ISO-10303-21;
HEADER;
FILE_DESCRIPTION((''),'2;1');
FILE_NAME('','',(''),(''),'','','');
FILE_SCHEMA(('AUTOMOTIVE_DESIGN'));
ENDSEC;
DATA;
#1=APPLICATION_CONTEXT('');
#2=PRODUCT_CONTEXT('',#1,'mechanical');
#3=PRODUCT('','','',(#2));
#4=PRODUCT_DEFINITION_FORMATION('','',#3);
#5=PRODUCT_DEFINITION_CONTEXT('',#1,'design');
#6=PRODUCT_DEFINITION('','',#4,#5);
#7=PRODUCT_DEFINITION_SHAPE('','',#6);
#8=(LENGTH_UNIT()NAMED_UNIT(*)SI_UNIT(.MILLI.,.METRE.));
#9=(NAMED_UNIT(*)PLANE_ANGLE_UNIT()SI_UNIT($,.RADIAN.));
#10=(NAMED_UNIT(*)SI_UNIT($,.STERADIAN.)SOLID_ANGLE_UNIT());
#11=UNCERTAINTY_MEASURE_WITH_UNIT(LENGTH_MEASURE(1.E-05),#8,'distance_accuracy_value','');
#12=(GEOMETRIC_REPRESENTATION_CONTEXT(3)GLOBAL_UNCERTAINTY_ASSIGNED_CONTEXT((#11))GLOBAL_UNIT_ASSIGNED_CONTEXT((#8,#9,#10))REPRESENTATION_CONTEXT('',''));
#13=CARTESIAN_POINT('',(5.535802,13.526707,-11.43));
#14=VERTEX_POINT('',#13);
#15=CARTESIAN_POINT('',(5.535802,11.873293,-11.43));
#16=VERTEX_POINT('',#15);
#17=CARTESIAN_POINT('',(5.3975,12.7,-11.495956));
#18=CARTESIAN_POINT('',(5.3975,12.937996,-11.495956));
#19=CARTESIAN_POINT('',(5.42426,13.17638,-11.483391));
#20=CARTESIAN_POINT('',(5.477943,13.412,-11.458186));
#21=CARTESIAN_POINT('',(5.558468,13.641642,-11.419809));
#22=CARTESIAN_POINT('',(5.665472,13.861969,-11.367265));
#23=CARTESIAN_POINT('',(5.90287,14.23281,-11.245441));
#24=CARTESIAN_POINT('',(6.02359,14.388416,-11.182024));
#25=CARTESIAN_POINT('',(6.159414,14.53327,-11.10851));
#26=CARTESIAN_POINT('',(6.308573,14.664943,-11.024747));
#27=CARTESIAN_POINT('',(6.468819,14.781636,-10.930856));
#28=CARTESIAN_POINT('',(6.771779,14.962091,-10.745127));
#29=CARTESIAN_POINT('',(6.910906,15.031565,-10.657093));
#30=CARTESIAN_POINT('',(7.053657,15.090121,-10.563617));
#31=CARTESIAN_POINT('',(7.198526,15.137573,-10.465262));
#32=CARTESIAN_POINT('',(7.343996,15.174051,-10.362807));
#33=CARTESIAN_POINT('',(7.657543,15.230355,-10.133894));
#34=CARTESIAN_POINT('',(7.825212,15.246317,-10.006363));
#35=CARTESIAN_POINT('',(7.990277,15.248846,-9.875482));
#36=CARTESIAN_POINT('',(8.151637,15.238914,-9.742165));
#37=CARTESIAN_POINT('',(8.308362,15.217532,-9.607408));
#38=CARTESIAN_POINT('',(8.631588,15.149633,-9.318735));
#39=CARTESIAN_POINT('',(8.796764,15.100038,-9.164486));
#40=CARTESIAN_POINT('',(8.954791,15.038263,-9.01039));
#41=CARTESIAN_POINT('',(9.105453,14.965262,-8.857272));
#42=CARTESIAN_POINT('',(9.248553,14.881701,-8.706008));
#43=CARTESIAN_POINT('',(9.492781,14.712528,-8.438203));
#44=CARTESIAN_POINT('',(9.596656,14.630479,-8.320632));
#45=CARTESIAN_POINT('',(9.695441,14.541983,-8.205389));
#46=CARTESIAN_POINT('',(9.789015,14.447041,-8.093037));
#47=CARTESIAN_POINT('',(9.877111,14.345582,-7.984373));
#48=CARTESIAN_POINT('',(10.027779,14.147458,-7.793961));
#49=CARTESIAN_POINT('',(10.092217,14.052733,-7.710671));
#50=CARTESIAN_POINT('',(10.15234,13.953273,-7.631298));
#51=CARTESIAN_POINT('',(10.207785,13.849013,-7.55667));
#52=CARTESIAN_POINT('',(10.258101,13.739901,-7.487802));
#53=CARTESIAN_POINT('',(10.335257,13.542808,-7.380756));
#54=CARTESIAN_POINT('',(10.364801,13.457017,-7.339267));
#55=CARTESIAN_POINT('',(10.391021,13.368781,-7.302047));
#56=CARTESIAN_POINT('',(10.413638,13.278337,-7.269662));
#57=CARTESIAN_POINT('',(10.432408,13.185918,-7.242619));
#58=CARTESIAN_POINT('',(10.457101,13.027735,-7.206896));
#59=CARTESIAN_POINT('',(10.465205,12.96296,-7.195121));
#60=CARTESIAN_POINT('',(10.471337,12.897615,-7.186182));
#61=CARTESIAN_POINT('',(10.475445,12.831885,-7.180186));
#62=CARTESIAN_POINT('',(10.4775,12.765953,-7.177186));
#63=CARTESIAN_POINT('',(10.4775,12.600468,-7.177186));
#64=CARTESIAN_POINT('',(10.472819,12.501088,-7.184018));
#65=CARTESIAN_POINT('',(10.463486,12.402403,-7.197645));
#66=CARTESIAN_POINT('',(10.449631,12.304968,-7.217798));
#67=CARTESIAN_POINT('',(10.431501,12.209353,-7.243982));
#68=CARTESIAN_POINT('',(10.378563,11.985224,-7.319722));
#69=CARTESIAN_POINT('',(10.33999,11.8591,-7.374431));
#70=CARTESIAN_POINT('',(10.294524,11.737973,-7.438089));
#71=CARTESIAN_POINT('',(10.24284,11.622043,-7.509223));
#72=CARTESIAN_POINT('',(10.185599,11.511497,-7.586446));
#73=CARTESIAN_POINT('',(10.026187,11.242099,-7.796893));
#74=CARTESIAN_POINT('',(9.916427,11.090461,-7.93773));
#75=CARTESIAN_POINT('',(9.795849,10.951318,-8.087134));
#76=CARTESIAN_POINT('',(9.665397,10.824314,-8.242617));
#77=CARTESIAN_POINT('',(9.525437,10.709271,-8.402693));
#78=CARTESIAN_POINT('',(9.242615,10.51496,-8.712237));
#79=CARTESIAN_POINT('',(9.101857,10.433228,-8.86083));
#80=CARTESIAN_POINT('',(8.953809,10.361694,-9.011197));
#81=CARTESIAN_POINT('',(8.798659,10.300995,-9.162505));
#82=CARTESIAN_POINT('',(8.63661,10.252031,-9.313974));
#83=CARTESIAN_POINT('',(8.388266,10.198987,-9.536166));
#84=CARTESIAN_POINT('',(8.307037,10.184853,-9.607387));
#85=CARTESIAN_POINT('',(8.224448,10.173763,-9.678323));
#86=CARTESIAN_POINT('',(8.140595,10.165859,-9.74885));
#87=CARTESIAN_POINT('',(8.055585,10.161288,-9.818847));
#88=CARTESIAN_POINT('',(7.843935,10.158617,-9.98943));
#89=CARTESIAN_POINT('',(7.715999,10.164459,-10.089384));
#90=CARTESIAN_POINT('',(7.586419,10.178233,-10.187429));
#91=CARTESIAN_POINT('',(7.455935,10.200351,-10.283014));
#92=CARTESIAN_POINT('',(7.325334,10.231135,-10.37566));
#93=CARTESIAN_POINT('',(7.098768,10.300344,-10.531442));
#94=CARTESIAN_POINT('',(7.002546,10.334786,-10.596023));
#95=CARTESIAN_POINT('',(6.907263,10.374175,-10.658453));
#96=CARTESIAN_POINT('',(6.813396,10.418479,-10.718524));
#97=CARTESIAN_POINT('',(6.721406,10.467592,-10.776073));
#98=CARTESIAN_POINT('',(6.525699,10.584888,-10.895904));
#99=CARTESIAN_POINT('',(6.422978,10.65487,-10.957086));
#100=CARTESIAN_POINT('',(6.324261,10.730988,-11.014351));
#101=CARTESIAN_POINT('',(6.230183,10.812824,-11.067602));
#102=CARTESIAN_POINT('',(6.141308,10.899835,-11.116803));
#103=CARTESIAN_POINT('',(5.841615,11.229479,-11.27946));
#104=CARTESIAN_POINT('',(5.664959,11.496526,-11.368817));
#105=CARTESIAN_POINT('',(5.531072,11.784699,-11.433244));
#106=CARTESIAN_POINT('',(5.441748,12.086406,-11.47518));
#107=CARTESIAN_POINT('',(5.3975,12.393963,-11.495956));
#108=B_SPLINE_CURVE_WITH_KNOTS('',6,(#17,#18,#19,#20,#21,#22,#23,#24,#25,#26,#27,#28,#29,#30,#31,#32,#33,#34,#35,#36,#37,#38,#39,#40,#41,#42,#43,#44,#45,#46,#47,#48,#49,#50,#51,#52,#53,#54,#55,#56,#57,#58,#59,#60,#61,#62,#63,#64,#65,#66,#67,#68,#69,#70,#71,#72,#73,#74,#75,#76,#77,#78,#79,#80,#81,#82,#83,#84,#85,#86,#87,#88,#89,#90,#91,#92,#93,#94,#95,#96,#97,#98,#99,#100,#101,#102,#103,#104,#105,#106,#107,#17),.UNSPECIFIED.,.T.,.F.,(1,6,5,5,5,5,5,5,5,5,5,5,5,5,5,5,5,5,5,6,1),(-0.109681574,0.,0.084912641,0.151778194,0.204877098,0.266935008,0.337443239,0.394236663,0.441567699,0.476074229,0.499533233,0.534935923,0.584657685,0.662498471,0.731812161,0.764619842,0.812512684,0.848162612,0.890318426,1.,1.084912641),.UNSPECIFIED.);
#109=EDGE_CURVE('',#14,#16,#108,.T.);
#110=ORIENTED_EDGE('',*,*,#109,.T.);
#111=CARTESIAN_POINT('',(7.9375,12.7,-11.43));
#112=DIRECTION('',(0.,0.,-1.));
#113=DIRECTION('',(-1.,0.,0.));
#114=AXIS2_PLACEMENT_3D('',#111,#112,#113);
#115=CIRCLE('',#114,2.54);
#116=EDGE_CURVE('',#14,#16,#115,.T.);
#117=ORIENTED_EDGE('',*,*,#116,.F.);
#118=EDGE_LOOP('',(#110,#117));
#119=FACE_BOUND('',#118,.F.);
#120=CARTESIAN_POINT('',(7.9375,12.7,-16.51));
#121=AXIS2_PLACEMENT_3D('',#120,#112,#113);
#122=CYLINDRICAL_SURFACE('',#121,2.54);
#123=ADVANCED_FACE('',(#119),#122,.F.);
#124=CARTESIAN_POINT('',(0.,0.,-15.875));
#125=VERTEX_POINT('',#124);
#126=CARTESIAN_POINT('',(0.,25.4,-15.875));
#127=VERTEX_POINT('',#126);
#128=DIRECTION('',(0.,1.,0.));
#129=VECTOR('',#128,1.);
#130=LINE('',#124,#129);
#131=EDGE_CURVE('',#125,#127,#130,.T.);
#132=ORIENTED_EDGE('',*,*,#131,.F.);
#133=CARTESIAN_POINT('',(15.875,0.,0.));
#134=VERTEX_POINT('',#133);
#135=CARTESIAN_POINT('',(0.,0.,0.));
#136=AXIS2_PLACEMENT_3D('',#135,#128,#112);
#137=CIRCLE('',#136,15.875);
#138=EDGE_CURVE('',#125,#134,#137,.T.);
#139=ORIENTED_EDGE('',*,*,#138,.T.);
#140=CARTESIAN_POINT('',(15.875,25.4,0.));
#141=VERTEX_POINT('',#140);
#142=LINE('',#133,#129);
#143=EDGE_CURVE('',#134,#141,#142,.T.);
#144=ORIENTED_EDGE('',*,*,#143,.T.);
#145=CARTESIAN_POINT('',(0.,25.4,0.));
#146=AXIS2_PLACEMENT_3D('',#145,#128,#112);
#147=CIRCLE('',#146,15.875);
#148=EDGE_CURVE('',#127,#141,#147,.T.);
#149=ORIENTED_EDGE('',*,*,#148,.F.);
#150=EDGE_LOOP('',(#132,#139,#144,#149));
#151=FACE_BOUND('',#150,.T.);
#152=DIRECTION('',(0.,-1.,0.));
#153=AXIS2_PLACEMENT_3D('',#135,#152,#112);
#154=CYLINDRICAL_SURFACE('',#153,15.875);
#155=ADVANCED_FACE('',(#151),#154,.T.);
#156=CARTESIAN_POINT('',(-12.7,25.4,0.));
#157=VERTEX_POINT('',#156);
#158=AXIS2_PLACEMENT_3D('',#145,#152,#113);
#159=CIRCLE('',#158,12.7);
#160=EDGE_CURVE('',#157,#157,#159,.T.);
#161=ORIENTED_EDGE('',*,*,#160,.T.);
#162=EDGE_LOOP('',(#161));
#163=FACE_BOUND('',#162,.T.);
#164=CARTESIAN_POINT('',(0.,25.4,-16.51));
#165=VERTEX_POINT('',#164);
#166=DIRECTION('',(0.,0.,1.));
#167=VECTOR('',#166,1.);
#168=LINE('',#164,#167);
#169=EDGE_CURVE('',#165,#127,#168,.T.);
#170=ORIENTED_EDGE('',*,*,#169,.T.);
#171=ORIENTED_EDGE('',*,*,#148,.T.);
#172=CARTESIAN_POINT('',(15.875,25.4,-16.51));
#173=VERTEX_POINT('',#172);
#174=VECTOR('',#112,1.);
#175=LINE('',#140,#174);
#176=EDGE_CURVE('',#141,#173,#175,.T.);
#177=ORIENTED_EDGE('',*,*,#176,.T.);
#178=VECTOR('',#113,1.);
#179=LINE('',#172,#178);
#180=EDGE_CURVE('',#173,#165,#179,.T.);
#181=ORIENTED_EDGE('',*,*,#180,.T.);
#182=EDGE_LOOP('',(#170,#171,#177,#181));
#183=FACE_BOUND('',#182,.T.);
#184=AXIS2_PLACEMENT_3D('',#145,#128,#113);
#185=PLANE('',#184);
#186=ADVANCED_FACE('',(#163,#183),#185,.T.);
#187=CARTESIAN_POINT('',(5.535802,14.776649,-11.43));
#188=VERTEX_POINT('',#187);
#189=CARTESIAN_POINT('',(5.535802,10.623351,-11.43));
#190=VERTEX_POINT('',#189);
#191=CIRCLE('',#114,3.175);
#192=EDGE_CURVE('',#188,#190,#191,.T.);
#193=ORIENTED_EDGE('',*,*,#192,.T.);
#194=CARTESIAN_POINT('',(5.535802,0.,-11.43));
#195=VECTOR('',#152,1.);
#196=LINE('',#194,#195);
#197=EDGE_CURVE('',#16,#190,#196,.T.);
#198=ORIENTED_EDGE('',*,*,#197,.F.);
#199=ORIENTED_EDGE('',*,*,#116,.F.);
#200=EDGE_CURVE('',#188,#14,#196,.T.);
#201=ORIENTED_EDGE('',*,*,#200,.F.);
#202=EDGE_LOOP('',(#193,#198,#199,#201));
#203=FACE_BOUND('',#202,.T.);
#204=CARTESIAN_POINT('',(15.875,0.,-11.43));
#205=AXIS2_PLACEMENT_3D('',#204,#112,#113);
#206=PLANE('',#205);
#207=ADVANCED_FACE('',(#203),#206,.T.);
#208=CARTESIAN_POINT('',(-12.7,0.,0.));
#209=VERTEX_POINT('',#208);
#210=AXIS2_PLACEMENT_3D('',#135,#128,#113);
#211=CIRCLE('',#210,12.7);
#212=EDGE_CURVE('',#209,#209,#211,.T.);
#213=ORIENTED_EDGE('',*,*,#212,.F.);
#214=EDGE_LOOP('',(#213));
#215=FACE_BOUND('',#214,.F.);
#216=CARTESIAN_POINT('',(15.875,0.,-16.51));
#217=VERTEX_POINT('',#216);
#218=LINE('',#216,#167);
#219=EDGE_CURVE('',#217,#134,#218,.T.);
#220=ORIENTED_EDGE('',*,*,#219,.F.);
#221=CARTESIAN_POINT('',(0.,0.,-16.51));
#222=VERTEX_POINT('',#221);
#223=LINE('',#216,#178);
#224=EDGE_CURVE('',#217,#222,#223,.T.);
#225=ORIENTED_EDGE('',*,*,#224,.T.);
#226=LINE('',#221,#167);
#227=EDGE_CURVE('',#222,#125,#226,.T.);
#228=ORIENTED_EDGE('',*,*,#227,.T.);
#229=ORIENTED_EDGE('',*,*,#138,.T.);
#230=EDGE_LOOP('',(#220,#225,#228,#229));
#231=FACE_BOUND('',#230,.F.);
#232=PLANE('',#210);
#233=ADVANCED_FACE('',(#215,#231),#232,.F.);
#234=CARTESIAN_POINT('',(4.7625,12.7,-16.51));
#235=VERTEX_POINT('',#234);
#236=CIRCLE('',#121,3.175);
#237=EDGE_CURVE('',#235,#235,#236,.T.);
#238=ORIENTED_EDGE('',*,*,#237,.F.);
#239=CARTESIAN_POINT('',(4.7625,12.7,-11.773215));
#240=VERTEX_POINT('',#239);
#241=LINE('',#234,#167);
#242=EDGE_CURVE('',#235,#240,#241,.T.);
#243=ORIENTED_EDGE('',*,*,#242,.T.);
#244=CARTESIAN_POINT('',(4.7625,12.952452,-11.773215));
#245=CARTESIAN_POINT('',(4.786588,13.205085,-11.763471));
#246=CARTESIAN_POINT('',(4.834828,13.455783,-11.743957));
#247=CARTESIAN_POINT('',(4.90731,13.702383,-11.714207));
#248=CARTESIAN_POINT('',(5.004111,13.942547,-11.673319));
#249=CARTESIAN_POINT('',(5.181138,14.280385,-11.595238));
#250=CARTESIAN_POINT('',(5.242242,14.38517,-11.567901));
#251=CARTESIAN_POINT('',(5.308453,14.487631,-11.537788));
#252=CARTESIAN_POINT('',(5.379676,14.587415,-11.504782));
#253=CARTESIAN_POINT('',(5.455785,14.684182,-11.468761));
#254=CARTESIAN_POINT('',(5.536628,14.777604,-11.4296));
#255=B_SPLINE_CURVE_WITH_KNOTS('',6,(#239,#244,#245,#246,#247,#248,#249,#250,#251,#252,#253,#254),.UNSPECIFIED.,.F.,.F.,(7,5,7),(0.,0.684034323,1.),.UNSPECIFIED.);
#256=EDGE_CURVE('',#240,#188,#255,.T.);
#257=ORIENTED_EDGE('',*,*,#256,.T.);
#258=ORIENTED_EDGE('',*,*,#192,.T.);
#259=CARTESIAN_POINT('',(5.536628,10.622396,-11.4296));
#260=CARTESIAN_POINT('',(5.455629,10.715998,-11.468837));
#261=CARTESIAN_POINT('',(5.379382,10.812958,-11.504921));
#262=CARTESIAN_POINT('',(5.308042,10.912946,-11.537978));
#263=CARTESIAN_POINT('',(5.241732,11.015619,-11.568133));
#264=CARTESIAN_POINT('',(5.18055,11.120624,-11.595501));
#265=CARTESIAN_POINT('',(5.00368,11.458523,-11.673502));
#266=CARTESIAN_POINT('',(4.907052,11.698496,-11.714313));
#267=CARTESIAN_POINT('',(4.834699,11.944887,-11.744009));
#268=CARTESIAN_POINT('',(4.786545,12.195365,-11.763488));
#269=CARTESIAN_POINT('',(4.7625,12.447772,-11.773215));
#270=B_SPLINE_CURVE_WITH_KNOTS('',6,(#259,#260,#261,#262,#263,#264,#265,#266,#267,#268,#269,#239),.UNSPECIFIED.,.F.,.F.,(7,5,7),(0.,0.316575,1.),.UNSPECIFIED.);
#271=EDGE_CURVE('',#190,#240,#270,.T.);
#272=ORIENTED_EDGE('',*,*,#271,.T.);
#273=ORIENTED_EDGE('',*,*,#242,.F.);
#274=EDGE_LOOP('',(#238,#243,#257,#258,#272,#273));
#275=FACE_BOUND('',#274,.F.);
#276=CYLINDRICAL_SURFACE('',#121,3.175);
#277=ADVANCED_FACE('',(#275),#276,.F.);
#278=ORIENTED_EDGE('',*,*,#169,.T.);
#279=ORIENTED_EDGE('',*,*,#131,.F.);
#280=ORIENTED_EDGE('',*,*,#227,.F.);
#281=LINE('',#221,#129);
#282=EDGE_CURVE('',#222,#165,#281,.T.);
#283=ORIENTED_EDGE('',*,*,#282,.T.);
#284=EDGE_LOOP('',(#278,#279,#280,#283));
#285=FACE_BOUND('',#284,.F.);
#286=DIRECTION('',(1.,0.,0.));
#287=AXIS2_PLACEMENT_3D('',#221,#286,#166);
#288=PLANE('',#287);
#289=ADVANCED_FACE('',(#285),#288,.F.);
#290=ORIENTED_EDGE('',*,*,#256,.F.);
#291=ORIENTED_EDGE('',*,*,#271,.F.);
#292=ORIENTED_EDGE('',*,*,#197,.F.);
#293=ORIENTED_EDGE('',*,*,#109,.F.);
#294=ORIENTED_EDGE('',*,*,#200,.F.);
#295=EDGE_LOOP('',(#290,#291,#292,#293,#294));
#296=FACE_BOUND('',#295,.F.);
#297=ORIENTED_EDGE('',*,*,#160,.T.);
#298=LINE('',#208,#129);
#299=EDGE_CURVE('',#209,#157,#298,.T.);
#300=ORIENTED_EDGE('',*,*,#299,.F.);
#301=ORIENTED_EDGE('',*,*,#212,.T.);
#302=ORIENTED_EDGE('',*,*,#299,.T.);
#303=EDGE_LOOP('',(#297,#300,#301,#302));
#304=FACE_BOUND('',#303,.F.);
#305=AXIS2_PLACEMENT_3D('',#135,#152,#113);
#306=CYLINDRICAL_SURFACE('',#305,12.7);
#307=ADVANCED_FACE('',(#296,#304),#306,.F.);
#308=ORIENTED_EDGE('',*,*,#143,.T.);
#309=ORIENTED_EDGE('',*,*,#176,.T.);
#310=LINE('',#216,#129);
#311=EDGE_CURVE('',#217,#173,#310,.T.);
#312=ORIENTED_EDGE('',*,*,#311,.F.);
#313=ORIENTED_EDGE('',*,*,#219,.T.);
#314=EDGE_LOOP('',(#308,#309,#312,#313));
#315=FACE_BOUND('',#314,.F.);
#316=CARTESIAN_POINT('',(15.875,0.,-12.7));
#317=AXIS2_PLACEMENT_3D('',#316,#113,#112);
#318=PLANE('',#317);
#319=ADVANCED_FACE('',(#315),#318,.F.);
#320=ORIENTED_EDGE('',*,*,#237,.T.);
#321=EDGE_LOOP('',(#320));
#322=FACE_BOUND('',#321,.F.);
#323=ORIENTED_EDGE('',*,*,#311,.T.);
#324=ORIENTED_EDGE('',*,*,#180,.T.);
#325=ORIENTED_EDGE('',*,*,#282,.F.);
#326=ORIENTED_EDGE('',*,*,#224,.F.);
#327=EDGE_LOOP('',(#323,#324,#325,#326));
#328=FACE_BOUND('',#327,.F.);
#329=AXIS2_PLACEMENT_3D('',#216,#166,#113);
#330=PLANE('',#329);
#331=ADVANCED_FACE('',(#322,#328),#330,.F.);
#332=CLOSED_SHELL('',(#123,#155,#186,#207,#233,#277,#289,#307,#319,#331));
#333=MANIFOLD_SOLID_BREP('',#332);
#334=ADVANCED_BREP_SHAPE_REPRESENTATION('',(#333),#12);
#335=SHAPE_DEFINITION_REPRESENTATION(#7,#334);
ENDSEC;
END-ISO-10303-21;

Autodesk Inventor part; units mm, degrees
ref_plane "YZ Plane" through (0, 0, 0) normal (1, 0, 0) x (0, 1, 0)
ref_plane "XZ Plane" through (0, 0, 0) normal (0, 1, 0) x (-1, 0, 0)
ref_plane "XY Plane" through (0, 0, 0) normal (0, 0, 1) x (1, 0, 0)
sketch "Sketch1" plane through (0, 0, 0) normal (0, 1, 0) x (-1, 0, 0)
  circle A0 centre (0, 0) radius 12.7
  arc A1 (0, -15.875) -> (-15.875, 0) centre (0, 0) ccw
  line L0 (-15.875, -12.7) -> (-15.875, -16.51)
  line L1 (-15.875, -16.51) -> (0, -16.51)
  line L2 (0, -16.51) -> (0, -12.7)
  line L3 (-15.875, -12.7) -> (-15.875, 0)
  dimension "d0" = 25.4
  dimension "d1" = 31.75
  dimension "d2" = 3.81
extrude "Extrusion1" add sketch "Sketch1" along normal blind 25.4
sketch "Sketch2" plane through (15.875, 0, -16.51) normal (0, 0, -1) x (-1, 0, 0)
  circle A0 centre (7.9375, 12.7) radius 2.54
  line L0 (15.875, 0) -> (15.875, 25.4) projected
  dimension "d5" = 5.08
  dimension "d6" = 7.9375
extrude "Extrusion2" cut sketch "Sketch2" against normal blind 13.081
sketch "Sketch3" plane through (15.875, 0, -16.51) normal (0, 0, -1) x (-1, 0, 0)
  circle A0 centre (7.9375, 12.7) radius 3.175
  line L0 (15.875, 0) -> (15.875, 25.4) projected
  dimension "d9" = 6.35
  dimension "d10" = 7.9375
extrude "Extrusion3" cut sketch "Sketch3" against normal blind 5.08
properties part number "motor spinner"
